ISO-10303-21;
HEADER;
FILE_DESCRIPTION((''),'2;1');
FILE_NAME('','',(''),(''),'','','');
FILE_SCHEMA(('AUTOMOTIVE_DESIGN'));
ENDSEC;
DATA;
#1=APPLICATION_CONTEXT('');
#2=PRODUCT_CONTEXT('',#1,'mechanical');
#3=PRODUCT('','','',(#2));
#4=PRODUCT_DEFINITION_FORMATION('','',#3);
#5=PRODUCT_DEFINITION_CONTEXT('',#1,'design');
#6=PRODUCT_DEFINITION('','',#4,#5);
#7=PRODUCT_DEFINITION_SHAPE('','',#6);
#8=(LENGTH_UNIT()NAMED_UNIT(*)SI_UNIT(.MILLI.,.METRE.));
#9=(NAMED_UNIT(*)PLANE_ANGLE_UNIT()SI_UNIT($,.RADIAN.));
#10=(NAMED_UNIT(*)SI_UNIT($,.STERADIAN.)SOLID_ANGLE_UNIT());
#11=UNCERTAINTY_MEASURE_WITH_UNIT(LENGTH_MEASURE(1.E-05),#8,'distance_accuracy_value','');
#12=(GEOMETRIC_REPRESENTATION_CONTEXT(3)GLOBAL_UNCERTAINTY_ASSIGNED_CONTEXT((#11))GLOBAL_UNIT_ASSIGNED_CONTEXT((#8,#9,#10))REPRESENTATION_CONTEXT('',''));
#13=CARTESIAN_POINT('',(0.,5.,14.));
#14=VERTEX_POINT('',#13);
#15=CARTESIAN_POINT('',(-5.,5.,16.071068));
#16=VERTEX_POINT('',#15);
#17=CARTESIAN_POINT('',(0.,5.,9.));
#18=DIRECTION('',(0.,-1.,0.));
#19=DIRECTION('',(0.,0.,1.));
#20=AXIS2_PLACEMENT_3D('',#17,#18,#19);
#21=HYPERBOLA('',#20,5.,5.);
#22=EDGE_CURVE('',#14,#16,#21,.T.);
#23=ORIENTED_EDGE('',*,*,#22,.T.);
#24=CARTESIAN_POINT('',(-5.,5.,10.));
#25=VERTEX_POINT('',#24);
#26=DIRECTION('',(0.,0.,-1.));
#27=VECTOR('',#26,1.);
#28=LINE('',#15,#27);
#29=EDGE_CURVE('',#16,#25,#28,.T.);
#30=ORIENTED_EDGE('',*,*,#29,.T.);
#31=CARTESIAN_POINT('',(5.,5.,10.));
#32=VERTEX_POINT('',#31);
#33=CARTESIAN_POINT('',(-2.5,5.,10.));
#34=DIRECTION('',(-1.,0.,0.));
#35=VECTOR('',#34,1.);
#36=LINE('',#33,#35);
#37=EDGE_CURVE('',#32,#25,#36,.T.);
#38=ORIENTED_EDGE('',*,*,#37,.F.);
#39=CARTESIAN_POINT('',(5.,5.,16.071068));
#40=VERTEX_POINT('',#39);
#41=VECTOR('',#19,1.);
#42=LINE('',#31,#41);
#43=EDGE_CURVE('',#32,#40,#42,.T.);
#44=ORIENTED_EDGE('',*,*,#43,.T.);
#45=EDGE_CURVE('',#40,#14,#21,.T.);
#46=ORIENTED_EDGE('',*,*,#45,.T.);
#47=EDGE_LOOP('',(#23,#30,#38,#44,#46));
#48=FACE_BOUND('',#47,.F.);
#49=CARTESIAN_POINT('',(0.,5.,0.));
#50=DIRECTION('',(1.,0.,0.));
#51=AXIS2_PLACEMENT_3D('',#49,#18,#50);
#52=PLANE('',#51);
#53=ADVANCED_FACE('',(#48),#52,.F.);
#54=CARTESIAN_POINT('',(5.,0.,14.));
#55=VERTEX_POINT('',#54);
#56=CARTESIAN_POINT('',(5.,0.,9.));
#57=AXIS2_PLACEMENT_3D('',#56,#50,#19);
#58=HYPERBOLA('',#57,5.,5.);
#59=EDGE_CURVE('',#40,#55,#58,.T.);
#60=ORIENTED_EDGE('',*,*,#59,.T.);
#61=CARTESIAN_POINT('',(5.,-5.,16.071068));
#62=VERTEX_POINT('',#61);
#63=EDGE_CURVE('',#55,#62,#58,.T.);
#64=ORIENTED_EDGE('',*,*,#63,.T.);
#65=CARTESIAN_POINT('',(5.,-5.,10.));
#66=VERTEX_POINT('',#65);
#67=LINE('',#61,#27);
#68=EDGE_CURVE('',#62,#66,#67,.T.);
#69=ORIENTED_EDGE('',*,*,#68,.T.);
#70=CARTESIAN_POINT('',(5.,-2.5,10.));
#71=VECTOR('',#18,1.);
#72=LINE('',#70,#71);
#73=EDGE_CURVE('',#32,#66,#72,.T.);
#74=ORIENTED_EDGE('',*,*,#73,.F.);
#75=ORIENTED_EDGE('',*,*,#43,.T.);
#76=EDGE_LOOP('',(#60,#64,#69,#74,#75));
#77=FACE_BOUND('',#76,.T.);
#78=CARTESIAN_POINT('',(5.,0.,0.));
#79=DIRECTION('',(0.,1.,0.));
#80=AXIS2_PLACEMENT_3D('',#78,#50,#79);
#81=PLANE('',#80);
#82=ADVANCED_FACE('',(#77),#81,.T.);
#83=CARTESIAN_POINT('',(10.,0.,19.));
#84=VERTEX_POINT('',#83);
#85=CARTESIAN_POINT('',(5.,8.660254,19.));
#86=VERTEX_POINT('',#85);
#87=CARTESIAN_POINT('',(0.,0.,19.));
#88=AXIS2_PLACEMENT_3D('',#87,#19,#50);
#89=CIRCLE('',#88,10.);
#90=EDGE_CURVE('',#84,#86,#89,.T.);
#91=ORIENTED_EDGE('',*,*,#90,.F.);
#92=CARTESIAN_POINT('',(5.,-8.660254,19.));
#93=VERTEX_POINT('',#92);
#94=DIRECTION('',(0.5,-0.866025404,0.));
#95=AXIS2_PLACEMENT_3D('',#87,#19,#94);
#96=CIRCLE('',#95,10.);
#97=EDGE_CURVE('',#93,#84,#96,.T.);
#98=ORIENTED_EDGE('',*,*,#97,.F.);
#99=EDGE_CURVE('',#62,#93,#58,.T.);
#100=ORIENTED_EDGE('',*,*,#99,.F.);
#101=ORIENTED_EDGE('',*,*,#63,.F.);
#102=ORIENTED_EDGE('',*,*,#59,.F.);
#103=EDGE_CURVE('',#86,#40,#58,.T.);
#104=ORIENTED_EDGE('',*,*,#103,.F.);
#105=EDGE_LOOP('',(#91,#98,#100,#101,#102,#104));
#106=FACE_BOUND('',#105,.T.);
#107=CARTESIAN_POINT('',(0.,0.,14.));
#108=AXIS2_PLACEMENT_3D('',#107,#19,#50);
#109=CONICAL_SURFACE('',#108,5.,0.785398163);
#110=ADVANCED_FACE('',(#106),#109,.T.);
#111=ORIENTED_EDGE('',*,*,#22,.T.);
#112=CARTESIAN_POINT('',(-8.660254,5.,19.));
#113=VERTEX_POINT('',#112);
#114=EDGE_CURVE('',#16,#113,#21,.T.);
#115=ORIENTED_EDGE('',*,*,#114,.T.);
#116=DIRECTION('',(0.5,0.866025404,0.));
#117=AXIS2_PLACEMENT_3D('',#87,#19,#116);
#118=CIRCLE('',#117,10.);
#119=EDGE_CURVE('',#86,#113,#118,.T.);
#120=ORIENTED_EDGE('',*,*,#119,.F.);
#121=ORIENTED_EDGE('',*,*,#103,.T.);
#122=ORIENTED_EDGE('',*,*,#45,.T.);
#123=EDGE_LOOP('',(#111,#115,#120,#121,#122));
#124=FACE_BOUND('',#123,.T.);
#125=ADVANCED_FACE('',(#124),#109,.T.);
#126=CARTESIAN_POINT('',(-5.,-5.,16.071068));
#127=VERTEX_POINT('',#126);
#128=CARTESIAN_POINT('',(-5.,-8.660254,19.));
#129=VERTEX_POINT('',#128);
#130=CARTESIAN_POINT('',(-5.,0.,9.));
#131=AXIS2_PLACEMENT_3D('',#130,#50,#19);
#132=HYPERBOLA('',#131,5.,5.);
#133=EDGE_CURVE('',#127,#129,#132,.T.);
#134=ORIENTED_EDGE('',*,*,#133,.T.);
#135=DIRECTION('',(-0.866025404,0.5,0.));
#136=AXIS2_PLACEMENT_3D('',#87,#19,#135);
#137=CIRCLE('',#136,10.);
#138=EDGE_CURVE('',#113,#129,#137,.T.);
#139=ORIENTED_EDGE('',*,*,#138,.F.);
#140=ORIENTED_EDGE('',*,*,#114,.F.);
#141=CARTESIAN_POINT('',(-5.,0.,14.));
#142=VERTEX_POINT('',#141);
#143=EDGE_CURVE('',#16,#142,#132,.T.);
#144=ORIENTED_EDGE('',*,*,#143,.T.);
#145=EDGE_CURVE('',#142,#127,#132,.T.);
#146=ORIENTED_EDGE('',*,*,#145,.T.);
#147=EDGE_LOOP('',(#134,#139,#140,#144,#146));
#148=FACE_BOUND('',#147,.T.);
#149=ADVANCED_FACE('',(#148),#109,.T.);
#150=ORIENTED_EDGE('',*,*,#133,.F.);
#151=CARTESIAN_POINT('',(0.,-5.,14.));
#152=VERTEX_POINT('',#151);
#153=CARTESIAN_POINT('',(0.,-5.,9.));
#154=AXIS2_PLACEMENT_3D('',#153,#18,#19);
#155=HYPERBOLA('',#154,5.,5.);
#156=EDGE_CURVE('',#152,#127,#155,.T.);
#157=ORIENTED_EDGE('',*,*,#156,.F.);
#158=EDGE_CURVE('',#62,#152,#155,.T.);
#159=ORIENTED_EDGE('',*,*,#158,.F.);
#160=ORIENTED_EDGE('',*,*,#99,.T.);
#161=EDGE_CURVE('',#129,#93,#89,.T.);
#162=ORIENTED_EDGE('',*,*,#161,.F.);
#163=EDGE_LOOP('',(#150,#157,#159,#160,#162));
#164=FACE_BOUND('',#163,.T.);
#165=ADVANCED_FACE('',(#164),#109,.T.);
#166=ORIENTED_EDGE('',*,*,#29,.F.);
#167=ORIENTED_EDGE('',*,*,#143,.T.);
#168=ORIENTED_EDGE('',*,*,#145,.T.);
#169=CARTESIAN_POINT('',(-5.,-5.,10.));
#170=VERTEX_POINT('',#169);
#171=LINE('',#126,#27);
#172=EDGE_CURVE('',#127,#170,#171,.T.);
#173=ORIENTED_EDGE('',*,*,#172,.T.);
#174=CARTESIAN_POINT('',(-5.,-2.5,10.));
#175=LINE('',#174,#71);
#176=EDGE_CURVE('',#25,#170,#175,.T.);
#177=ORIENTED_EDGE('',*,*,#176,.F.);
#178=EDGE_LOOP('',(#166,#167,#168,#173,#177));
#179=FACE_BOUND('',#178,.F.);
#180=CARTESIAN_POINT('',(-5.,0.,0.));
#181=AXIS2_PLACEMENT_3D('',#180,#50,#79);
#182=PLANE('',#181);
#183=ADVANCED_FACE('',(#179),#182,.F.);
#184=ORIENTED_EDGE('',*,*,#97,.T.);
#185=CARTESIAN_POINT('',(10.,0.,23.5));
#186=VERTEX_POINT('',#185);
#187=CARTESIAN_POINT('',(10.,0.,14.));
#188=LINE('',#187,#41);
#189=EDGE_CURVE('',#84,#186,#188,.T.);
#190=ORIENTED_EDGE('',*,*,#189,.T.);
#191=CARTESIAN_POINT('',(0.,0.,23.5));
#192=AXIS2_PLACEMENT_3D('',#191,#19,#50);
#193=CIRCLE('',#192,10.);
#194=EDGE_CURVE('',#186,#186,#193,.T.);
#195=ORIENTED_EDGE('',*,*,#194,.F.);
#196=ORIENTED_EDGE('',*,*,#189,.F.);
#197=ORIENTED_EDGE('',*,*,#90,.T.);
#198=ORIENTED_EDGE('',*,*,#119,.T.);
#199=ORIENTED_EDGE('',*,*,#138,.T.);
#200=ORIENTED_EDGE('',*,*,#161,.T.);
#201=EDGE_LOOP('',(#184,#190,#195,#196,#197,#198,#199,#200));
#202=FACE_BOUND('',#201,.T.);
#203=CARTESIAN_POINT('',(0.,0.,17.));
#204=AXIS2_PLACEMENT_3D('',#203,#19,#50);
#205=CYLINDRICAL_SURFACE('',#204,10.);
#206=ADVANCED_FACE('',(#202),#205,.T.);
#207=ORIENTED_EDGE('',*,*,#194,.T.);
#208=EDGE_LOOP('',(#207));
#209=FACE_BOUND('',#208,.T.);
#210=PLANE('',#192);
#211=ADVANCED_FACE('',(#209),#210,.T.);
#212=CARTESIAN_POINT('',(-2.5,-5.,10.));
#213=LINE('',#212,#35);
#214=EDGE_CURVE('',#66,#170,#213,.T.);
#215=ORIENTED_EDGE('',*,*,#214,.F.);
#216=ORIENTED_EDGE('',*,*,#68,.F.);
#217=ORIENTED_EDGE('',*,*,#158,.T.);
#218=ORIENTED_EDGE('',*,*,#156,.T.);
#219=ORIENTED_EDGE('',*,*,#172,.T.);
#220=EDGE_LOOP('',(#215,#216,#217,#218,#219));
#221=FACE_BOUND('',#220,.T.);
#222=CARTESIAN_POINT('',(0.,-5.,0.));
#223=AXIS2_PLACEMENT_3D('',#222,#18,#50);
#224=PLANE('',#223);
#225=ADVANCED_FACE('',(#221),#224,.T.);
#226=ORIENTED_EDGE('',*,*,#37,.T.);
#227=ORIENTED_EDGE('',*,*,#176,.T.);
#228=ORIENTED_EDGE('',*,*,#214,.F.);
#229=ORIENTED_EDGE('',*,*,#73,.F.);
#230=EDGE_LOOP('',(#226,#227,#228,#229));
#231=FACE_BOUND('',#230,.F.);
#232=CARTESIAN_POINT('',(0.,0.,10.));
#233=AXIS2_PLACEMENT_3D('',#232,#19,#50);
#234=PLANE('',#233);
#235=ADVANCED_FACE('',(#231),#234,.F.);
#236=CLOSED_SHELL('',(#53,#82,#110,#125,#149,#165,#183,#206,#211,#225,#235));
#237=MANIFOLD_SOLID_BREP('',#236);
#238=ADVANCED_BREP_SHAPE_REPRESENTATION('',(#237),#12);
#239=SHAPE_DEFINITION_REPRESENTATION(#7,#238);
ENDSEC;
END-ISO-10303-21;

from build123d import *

# Parameters (mm, degrees)
F0_W     = 41
F0_H     = 41
F0_W_2   = 10
F0_H_2   = 10
F1_DEPTH = 10
F2_DEPTH = 25
F3_R     = 10
F4_DEPTH = 8
F6_DEPTH = 25
F7_DEPTH = 1.5
F8_DEPTH = 10
F9_DEPTH = 3


# Not quite as in the source:
# - a fillet or chamfer that OpenCascade refuses, or shapes differently, is made with other operations: its cross-section is extruded or revolved along the edge and cut away or added


with BuildPart() as f1:
    # F0 (on Top) → F1 (new body)
    with BuildSketch(Plane.XY):
        Rectangle(F0_W, F0_H)
        Rectangle(F0_W_2, F0_H_2, mode=Mode.SUBTRACT)
        Rectangle(F0_W_2, F0_H_2)
    extrude(amount=F1_DEPTH)

    # F0 (on Top) → F2 (join)
    with BuildSketch(Plane.XY):
        Rectangle(F0_W_2, F0_H_2)
    extrude(amount=F2_DEPTH)

    # F3 (on face) → F4 (join)
    with BuildSketch(Plane.XY.offset(25)):
        Circle(F3_R)
    extrude(amount=-F4_DEPTH)

    # F5 (on face) → F6 (cut)
    with BuildSketch(Plane(origin=(0, 0, 0), x_dir=(1, 0, 0), z_dir=(0, 0, -1))):
        with BuildLine():
            Line((0, 20.5), (0, 16.625))
            ThreePointArc((0, 16.625), (14.2014511666, 13.1849661001), (20.5, 0))
            Line((20.5, 0), (20.5, 20.5))
            Line((20.5, 20.5), (0, 20.5))
        make_face()
        with BuildLine():
            Line((20.5, -20.5), (20.5, 0))
            Line((20.5, 0), (16.625, 0))
            ThreePointArc((16.625, 0), (13.15340166, -14.1758531755), (0, -20.5))
            Line((0, -20.5), (20.5, -20.5))
        make_face()
        with BuildLine():
            ThreePointArc((0, -16.625), (-14.1919455674, -13.1732449101), (-20.5, 0))
            Line((-20.5, 0), (-20.5, -20.5))
            Line((-20.5, -20.5), (0, -20.5))
            Line((0, -20.5), (0, -16.625))
        make_face()
        with BuildLine():
            ThreePointArc((-16.625, 0), (-13.1636820987, 14.1841903605), (0, 20.5))
            Line((0, 20.5), (-20.5, 20.5))
            Line((-20.5, 20.5), (-20.5, 0))
            Line((-20.5, 0), (-16.625, 0))
        make_face()
    extrude(amount=-F6_DEPTH, mode=Mode.SUBTRACT)

    # F7 (cut): a face of the model
    f7_faces = [f1.faces().sort_by_distance(p)[0] for p in [
        (0, 0, 25),
    ]]
    extrude(f7_faces, amount=-F7_DEPTH, mode=Mode.SUBTRACT)

    # F8 (cut): a face of the model
    f8_faces = [f1.faces().sort_by_distance(p)[0] for p in [
        (0.0007164835, -0.0062799282, 0),
    ]]
    extrude(f8_faces, amount=-F8_DEPTH, mode=Mode.SUBTRACT)

    # F9 (add): a face of the model
    f9_faces = [f1.faces().sort_by_distance(p)[0] for p in [
        (-9.7171572875, 0, 17),
    ]]
    extrude(f9_faces, amount=F9_DEPTH)

    # F10: chamfer of 5 on 1 edges, made by hand


with BuildPart() as f10_tool2:
    # F10_s3 → F10_t4 (revolve)
    with BuildSketch(Plane.XZ):
        Polygon((5, 14), (10, 19), (10, 14), align=None)
    revolve(axis=Axis((0, 0, 14), (0, 0, 1)))

    split(bisect_by=Plane.YZ.offset(5), keep=Keep.TOP)


with BuildPart() as f1_1:
    add(f1.part)

    # F10_t1: cut F10_tool2
    add(f10_tool2.part, mode=Mode.SUBTRACT)


with BuildPart() as f10_tool7:
    # F10_s8 → F10_t9 (revolve)
    with BuildSketch(Plane.XZ):
        Polygon((5, 14), (10, 19), (10, 14), align=None)
    revolve(axis=Axis((0, 0, 14), (0, 0, 1)))

    split(bisect_by=Plane.XZ.offset(-5), keep=Keep.BOTTOM)


with BuildPart() as f1_2:
    add(f1_1.part)

    # F10_t6: cut F10_tool7
    add(f10_tool7.part, mode=Mode.SUBTRACT)


with BuildPart() as f10_tool12:
    # F10_s13 → F10_t14 (revolve)
    with BuildSketch(Plane.XZ):
        Polygon((5, 14), (10, 19), (10, 14), align=None)
    revolve(axis=Axis((0, 0, 14), (0, 0, 1)))

    split(bisect_by=Plane.YZ.offset(-5), keep=Keep.BOTTOM)


with BuildPart() as f1_3:
    add(f1_2.part)

    # F10_t11: cut F10_tool12
    add(f10_tool12.part, mode=Mode.SUBTRACT)


with BuildPart() as f10_tool17:
    # F10_s18 → F10_t19 (revolve)
    with BuildSketch(Plane.XZ):
        Polygon((5, 14), (10, 19), (10, 14), align=None)
    revolve(axis=Axis((0, 0, 14), (0, 0, 1)))

    split(bisect_by=Plane.XZ.offset(5), keep=Keep.TOP)


with BuildPart() as f1_4:
    add(f1_3.part)

    # F10_t16: cut F10_tool17
    add(f10_tool17.part, mode=Mode.SUBTRACT)


solid = f1_4.part
